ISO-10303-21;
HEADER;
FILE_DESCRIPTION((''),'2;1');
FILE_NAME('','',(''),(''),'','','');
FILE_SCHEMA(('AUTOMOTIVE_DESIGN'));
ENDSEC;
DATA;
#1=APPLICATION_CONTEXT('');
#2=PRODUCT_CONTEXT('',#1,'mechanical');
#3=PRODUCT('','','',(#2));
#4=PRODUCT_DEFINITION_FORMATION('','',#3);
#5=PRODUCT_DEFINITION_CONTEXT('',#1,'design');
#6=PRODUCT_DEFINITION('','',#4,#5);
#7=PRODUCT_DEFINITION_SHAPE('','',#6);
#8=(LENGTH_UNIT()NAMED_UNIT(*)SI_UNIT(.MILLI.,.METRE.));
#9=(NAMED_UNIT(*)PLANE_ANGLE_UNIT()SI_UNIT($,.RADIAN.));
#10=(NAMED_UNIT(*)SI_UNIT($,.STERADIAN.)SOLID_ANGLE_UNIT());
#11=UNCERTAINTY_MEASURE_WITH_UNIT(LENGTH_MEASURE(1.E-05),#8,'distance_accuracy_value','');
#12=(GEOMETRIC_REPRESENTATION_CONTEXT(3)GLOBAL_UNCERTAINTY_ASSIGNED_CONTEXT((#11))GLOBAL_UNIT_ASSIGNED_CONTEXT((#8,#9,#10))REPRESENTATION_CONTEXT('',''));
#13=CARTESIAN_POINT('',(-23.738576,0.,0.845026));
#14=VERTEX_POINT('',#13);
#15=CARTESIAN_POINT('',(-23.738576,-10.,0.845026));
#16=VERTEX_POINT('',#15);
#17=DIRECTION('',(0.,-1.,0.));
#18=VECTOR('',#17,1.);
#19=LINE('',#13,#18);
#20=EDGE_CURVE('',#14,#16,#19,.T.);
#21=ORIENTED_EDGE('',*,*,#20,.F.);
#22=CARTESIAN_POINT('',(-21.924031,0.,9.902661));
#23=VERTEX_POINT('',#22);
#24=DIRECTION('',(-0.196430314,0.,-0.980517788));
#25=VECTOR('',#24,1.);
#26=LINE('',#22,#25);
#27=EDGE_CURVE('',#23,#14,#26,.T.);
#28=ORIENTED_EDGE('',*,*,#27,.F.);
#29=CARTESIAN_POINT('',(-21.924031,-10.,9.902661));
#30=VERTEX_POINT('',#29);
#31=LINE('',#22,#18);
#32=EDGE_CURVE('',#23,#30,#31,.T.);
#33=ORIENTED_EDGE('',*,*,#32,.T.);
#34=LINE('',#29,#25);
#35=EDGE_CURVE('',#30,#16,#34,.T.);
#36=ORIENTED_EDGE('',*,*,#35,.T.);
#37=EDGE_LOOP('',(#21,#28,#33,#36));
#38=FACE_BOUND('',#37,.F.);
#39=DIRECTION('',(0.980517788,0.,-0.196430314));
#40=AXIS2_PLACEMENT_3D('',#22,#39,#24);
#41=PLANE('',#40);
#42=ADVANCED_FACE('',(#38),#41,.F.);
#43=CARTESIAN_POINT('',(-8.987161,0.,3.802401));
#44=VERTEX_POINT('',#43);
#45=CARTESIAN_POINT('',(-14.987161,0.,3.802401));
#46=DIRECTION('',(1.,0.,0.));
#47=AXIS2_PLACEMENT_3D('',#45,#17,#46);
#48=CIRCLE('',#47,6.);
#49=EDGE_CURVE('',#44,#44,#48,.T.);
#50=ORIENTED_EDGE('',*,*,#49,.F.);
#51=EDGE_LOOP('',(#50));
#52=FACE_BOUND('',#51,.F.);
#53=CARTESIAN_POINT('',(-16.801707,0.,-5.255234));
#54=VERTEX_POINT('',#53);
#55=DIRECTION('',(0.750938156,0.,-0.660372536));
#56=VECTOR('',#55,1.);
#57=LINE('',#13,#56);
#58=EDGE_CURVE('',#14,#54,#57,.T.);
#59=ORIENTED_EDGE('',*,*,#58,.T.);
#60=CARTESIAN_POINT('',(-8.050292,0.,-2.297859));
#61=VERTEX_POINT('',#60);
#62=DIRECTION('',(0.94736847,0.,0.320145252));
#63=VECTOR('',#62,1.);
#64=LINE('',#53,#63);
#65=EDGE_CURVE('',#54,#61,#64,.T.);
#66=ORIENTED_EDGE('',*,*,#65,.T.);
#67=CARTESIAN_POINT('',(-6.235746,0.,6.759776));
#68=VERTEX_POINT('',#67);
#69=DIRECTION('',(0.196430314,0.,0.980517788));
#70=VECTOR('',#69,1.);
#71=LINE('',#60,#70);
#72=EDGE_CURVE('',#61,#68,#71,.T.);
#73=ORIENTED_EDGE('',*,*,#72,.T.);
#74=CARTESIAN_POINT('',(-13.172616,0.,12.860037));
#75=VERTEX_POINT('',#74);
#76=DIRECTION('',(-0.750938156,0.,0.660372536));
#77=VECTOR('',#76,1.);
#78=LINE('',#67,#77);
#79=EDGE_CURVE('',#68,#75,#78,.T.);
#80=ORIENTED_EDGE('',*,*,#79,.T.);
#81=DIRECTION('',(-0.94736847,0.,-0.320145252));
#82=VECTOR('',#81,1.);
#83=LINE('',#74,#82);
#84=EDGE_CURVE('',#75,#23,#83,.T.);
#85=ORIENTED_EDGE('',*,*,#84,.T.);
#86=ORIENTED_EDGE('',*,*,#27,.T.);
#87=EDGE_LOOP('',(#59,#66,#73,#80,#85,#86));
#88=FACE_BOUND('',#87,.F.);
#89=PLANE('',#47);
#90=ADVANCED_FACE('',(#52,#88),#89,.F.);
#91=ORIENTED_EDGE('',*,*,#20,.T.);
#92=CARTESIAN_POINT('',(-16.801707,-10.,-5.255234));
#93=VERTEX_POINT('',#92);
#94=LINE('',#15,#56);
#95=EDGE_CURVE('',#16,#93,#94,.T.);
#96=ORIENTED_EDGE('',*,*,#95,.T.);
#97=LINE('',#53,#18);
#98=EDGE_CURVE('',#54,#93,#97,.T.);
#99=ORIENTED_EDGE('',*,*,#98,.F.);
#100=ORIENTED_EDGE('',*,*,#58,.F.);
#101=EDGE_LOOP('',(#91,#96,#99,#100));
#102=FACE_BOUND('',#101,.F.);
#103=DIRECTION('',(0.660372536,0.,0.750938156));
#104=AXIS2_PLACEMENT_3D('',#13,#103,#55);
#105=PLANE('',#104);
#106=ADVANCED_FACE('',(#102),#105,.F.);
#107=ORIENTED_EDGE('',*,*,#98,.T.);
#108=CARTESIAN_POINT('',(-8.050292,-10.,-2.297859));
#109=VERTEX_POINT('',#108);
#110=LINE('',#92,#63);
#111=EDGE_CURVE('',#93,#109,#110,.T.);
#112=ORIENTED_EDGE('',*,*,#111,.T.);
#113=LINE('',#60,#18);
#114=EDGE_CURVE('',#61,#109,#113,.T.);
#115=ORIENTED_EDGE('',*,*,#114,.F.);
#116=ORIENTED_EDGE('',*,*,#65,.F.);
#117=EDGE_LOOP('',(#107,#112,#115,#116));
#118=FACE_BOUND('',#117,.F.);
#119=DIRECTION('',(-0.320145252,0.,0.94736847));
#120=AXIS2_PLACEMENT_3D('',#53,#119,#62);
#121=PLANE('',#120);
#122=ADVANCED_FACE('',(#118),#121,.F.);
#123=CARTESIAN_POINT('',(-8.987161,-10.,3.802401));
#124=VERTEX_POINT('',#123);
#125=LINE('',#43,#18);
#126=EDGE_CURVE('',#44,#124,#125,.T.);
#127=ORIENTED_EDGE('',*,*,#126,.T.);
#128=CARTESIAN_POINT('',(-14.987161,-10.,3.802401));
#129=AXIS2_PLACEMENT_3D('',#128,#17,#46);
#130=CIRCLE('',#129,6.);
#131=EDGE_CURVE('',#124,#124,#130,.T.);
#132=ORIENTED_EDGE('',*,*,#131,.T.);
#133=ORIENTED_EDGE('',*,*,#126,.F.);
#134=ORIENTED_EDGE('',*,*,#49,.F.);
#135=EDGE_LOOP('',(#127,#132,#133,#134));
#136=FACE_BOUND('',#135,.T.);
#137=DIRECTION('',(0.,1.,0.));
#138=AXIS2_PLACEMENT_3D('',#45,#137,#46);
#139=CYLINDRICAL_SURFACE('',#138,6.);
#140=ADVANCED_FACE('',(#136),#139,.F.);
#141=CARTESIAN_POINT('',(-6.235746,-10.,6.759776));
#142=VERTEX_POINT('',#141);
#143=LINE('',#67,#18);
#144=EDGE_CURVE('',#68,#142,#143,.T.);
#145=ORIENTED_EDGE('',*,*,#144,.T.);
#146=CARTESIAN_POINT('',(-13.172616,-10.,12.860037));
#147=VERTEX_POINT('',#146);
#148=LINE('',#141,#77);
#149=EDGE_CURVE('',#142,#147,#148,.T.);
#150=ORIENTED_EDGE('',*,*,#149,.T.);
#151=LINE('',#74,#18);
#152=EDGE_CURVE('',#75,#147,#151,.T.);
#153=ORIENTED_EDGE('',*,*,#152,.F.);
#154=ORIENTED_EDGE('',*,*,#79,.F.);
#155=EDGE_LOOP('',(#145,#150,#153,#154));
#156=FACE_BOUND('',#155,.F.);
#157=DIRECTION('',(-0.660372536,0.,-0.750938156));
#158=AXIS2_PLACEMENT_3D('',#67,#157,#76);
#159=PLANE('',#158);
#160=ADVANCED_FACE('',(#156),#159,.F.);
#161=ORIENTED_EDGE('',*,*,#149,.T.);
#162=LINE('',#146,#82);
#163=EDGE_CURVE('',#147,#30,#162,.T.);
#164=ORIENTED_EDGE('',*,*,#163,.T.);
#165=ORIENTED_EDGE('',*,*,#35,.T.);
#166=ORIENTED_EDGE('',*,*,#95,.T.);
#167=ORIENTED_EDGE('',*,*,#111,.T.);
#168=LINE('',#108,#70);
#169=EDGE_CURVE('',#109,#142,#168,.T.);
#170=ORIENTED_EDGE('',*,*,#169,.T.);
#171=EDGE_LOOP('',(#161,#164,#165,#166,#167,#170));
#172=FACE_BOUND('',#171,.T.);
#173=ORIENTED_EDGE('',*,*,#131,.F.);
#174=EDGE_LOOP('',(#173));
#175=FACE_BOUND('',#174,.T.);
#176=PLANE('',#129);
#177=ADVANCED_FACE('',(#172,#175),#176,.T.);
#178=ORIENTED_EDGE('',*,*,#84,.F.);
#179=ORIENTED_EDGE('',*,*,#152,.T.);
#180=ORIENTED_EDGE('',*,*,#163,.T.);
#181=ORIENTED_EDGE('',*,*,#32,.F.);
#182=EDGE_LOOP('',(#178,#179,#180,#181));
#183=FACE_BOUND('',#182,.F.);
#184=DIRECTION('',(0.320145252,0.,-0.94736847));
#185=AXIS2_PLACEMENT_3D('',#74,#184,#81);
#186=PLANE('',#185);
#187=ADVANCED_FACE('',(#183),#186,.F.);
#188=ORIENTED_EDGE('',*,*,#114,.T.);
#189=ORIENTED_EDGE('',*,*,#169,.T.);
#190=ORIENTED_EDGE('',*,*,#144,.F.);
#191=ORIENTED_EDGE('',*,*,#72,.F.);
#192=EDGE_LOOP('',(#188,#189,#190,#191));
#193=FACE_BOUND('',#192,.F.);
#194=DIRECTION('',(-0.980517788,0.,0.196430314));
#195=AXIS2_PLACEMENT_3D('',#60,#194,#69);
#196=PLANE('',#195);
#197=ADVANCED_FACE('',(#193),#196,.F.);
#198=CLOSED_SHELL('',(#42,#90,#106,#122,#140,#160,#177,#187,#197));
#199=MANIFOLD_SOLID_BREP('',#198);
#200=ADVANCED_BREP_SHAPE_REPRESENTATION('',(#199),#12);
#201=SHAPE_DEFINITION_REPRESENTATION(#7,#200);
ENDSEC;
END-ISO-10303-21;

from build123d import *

# Parameters (mm, degrees)
F0_R     = 6
F1_DEPTH = 10


# Not quite as in the source:
# - the program builds the solid bodies; features that only make, move or delete a surface that nothing else refers to are left out


with BuildPart() as f1:
    # F0 (on Front) → F1 (new body)
    with BuildSketch(Plane.XZ):
        Polygon((-16.8017068945, -5.2552340917), (-8.0502918376, -2.2978589318), (-6.2357463262, 6.7597764064), (-13.1726158716, 12.8600365847), (-21.9240309284, 9.9026614248), (-23.7385764399, 0.8450260866), align=None)
        with Locations((-14.987161383, 3.8024012465)):
            Circle(F0_R, mode=Mode.SUBTRACT)
    extrude(amount=F1_DEPTH)


solid = f1.part
